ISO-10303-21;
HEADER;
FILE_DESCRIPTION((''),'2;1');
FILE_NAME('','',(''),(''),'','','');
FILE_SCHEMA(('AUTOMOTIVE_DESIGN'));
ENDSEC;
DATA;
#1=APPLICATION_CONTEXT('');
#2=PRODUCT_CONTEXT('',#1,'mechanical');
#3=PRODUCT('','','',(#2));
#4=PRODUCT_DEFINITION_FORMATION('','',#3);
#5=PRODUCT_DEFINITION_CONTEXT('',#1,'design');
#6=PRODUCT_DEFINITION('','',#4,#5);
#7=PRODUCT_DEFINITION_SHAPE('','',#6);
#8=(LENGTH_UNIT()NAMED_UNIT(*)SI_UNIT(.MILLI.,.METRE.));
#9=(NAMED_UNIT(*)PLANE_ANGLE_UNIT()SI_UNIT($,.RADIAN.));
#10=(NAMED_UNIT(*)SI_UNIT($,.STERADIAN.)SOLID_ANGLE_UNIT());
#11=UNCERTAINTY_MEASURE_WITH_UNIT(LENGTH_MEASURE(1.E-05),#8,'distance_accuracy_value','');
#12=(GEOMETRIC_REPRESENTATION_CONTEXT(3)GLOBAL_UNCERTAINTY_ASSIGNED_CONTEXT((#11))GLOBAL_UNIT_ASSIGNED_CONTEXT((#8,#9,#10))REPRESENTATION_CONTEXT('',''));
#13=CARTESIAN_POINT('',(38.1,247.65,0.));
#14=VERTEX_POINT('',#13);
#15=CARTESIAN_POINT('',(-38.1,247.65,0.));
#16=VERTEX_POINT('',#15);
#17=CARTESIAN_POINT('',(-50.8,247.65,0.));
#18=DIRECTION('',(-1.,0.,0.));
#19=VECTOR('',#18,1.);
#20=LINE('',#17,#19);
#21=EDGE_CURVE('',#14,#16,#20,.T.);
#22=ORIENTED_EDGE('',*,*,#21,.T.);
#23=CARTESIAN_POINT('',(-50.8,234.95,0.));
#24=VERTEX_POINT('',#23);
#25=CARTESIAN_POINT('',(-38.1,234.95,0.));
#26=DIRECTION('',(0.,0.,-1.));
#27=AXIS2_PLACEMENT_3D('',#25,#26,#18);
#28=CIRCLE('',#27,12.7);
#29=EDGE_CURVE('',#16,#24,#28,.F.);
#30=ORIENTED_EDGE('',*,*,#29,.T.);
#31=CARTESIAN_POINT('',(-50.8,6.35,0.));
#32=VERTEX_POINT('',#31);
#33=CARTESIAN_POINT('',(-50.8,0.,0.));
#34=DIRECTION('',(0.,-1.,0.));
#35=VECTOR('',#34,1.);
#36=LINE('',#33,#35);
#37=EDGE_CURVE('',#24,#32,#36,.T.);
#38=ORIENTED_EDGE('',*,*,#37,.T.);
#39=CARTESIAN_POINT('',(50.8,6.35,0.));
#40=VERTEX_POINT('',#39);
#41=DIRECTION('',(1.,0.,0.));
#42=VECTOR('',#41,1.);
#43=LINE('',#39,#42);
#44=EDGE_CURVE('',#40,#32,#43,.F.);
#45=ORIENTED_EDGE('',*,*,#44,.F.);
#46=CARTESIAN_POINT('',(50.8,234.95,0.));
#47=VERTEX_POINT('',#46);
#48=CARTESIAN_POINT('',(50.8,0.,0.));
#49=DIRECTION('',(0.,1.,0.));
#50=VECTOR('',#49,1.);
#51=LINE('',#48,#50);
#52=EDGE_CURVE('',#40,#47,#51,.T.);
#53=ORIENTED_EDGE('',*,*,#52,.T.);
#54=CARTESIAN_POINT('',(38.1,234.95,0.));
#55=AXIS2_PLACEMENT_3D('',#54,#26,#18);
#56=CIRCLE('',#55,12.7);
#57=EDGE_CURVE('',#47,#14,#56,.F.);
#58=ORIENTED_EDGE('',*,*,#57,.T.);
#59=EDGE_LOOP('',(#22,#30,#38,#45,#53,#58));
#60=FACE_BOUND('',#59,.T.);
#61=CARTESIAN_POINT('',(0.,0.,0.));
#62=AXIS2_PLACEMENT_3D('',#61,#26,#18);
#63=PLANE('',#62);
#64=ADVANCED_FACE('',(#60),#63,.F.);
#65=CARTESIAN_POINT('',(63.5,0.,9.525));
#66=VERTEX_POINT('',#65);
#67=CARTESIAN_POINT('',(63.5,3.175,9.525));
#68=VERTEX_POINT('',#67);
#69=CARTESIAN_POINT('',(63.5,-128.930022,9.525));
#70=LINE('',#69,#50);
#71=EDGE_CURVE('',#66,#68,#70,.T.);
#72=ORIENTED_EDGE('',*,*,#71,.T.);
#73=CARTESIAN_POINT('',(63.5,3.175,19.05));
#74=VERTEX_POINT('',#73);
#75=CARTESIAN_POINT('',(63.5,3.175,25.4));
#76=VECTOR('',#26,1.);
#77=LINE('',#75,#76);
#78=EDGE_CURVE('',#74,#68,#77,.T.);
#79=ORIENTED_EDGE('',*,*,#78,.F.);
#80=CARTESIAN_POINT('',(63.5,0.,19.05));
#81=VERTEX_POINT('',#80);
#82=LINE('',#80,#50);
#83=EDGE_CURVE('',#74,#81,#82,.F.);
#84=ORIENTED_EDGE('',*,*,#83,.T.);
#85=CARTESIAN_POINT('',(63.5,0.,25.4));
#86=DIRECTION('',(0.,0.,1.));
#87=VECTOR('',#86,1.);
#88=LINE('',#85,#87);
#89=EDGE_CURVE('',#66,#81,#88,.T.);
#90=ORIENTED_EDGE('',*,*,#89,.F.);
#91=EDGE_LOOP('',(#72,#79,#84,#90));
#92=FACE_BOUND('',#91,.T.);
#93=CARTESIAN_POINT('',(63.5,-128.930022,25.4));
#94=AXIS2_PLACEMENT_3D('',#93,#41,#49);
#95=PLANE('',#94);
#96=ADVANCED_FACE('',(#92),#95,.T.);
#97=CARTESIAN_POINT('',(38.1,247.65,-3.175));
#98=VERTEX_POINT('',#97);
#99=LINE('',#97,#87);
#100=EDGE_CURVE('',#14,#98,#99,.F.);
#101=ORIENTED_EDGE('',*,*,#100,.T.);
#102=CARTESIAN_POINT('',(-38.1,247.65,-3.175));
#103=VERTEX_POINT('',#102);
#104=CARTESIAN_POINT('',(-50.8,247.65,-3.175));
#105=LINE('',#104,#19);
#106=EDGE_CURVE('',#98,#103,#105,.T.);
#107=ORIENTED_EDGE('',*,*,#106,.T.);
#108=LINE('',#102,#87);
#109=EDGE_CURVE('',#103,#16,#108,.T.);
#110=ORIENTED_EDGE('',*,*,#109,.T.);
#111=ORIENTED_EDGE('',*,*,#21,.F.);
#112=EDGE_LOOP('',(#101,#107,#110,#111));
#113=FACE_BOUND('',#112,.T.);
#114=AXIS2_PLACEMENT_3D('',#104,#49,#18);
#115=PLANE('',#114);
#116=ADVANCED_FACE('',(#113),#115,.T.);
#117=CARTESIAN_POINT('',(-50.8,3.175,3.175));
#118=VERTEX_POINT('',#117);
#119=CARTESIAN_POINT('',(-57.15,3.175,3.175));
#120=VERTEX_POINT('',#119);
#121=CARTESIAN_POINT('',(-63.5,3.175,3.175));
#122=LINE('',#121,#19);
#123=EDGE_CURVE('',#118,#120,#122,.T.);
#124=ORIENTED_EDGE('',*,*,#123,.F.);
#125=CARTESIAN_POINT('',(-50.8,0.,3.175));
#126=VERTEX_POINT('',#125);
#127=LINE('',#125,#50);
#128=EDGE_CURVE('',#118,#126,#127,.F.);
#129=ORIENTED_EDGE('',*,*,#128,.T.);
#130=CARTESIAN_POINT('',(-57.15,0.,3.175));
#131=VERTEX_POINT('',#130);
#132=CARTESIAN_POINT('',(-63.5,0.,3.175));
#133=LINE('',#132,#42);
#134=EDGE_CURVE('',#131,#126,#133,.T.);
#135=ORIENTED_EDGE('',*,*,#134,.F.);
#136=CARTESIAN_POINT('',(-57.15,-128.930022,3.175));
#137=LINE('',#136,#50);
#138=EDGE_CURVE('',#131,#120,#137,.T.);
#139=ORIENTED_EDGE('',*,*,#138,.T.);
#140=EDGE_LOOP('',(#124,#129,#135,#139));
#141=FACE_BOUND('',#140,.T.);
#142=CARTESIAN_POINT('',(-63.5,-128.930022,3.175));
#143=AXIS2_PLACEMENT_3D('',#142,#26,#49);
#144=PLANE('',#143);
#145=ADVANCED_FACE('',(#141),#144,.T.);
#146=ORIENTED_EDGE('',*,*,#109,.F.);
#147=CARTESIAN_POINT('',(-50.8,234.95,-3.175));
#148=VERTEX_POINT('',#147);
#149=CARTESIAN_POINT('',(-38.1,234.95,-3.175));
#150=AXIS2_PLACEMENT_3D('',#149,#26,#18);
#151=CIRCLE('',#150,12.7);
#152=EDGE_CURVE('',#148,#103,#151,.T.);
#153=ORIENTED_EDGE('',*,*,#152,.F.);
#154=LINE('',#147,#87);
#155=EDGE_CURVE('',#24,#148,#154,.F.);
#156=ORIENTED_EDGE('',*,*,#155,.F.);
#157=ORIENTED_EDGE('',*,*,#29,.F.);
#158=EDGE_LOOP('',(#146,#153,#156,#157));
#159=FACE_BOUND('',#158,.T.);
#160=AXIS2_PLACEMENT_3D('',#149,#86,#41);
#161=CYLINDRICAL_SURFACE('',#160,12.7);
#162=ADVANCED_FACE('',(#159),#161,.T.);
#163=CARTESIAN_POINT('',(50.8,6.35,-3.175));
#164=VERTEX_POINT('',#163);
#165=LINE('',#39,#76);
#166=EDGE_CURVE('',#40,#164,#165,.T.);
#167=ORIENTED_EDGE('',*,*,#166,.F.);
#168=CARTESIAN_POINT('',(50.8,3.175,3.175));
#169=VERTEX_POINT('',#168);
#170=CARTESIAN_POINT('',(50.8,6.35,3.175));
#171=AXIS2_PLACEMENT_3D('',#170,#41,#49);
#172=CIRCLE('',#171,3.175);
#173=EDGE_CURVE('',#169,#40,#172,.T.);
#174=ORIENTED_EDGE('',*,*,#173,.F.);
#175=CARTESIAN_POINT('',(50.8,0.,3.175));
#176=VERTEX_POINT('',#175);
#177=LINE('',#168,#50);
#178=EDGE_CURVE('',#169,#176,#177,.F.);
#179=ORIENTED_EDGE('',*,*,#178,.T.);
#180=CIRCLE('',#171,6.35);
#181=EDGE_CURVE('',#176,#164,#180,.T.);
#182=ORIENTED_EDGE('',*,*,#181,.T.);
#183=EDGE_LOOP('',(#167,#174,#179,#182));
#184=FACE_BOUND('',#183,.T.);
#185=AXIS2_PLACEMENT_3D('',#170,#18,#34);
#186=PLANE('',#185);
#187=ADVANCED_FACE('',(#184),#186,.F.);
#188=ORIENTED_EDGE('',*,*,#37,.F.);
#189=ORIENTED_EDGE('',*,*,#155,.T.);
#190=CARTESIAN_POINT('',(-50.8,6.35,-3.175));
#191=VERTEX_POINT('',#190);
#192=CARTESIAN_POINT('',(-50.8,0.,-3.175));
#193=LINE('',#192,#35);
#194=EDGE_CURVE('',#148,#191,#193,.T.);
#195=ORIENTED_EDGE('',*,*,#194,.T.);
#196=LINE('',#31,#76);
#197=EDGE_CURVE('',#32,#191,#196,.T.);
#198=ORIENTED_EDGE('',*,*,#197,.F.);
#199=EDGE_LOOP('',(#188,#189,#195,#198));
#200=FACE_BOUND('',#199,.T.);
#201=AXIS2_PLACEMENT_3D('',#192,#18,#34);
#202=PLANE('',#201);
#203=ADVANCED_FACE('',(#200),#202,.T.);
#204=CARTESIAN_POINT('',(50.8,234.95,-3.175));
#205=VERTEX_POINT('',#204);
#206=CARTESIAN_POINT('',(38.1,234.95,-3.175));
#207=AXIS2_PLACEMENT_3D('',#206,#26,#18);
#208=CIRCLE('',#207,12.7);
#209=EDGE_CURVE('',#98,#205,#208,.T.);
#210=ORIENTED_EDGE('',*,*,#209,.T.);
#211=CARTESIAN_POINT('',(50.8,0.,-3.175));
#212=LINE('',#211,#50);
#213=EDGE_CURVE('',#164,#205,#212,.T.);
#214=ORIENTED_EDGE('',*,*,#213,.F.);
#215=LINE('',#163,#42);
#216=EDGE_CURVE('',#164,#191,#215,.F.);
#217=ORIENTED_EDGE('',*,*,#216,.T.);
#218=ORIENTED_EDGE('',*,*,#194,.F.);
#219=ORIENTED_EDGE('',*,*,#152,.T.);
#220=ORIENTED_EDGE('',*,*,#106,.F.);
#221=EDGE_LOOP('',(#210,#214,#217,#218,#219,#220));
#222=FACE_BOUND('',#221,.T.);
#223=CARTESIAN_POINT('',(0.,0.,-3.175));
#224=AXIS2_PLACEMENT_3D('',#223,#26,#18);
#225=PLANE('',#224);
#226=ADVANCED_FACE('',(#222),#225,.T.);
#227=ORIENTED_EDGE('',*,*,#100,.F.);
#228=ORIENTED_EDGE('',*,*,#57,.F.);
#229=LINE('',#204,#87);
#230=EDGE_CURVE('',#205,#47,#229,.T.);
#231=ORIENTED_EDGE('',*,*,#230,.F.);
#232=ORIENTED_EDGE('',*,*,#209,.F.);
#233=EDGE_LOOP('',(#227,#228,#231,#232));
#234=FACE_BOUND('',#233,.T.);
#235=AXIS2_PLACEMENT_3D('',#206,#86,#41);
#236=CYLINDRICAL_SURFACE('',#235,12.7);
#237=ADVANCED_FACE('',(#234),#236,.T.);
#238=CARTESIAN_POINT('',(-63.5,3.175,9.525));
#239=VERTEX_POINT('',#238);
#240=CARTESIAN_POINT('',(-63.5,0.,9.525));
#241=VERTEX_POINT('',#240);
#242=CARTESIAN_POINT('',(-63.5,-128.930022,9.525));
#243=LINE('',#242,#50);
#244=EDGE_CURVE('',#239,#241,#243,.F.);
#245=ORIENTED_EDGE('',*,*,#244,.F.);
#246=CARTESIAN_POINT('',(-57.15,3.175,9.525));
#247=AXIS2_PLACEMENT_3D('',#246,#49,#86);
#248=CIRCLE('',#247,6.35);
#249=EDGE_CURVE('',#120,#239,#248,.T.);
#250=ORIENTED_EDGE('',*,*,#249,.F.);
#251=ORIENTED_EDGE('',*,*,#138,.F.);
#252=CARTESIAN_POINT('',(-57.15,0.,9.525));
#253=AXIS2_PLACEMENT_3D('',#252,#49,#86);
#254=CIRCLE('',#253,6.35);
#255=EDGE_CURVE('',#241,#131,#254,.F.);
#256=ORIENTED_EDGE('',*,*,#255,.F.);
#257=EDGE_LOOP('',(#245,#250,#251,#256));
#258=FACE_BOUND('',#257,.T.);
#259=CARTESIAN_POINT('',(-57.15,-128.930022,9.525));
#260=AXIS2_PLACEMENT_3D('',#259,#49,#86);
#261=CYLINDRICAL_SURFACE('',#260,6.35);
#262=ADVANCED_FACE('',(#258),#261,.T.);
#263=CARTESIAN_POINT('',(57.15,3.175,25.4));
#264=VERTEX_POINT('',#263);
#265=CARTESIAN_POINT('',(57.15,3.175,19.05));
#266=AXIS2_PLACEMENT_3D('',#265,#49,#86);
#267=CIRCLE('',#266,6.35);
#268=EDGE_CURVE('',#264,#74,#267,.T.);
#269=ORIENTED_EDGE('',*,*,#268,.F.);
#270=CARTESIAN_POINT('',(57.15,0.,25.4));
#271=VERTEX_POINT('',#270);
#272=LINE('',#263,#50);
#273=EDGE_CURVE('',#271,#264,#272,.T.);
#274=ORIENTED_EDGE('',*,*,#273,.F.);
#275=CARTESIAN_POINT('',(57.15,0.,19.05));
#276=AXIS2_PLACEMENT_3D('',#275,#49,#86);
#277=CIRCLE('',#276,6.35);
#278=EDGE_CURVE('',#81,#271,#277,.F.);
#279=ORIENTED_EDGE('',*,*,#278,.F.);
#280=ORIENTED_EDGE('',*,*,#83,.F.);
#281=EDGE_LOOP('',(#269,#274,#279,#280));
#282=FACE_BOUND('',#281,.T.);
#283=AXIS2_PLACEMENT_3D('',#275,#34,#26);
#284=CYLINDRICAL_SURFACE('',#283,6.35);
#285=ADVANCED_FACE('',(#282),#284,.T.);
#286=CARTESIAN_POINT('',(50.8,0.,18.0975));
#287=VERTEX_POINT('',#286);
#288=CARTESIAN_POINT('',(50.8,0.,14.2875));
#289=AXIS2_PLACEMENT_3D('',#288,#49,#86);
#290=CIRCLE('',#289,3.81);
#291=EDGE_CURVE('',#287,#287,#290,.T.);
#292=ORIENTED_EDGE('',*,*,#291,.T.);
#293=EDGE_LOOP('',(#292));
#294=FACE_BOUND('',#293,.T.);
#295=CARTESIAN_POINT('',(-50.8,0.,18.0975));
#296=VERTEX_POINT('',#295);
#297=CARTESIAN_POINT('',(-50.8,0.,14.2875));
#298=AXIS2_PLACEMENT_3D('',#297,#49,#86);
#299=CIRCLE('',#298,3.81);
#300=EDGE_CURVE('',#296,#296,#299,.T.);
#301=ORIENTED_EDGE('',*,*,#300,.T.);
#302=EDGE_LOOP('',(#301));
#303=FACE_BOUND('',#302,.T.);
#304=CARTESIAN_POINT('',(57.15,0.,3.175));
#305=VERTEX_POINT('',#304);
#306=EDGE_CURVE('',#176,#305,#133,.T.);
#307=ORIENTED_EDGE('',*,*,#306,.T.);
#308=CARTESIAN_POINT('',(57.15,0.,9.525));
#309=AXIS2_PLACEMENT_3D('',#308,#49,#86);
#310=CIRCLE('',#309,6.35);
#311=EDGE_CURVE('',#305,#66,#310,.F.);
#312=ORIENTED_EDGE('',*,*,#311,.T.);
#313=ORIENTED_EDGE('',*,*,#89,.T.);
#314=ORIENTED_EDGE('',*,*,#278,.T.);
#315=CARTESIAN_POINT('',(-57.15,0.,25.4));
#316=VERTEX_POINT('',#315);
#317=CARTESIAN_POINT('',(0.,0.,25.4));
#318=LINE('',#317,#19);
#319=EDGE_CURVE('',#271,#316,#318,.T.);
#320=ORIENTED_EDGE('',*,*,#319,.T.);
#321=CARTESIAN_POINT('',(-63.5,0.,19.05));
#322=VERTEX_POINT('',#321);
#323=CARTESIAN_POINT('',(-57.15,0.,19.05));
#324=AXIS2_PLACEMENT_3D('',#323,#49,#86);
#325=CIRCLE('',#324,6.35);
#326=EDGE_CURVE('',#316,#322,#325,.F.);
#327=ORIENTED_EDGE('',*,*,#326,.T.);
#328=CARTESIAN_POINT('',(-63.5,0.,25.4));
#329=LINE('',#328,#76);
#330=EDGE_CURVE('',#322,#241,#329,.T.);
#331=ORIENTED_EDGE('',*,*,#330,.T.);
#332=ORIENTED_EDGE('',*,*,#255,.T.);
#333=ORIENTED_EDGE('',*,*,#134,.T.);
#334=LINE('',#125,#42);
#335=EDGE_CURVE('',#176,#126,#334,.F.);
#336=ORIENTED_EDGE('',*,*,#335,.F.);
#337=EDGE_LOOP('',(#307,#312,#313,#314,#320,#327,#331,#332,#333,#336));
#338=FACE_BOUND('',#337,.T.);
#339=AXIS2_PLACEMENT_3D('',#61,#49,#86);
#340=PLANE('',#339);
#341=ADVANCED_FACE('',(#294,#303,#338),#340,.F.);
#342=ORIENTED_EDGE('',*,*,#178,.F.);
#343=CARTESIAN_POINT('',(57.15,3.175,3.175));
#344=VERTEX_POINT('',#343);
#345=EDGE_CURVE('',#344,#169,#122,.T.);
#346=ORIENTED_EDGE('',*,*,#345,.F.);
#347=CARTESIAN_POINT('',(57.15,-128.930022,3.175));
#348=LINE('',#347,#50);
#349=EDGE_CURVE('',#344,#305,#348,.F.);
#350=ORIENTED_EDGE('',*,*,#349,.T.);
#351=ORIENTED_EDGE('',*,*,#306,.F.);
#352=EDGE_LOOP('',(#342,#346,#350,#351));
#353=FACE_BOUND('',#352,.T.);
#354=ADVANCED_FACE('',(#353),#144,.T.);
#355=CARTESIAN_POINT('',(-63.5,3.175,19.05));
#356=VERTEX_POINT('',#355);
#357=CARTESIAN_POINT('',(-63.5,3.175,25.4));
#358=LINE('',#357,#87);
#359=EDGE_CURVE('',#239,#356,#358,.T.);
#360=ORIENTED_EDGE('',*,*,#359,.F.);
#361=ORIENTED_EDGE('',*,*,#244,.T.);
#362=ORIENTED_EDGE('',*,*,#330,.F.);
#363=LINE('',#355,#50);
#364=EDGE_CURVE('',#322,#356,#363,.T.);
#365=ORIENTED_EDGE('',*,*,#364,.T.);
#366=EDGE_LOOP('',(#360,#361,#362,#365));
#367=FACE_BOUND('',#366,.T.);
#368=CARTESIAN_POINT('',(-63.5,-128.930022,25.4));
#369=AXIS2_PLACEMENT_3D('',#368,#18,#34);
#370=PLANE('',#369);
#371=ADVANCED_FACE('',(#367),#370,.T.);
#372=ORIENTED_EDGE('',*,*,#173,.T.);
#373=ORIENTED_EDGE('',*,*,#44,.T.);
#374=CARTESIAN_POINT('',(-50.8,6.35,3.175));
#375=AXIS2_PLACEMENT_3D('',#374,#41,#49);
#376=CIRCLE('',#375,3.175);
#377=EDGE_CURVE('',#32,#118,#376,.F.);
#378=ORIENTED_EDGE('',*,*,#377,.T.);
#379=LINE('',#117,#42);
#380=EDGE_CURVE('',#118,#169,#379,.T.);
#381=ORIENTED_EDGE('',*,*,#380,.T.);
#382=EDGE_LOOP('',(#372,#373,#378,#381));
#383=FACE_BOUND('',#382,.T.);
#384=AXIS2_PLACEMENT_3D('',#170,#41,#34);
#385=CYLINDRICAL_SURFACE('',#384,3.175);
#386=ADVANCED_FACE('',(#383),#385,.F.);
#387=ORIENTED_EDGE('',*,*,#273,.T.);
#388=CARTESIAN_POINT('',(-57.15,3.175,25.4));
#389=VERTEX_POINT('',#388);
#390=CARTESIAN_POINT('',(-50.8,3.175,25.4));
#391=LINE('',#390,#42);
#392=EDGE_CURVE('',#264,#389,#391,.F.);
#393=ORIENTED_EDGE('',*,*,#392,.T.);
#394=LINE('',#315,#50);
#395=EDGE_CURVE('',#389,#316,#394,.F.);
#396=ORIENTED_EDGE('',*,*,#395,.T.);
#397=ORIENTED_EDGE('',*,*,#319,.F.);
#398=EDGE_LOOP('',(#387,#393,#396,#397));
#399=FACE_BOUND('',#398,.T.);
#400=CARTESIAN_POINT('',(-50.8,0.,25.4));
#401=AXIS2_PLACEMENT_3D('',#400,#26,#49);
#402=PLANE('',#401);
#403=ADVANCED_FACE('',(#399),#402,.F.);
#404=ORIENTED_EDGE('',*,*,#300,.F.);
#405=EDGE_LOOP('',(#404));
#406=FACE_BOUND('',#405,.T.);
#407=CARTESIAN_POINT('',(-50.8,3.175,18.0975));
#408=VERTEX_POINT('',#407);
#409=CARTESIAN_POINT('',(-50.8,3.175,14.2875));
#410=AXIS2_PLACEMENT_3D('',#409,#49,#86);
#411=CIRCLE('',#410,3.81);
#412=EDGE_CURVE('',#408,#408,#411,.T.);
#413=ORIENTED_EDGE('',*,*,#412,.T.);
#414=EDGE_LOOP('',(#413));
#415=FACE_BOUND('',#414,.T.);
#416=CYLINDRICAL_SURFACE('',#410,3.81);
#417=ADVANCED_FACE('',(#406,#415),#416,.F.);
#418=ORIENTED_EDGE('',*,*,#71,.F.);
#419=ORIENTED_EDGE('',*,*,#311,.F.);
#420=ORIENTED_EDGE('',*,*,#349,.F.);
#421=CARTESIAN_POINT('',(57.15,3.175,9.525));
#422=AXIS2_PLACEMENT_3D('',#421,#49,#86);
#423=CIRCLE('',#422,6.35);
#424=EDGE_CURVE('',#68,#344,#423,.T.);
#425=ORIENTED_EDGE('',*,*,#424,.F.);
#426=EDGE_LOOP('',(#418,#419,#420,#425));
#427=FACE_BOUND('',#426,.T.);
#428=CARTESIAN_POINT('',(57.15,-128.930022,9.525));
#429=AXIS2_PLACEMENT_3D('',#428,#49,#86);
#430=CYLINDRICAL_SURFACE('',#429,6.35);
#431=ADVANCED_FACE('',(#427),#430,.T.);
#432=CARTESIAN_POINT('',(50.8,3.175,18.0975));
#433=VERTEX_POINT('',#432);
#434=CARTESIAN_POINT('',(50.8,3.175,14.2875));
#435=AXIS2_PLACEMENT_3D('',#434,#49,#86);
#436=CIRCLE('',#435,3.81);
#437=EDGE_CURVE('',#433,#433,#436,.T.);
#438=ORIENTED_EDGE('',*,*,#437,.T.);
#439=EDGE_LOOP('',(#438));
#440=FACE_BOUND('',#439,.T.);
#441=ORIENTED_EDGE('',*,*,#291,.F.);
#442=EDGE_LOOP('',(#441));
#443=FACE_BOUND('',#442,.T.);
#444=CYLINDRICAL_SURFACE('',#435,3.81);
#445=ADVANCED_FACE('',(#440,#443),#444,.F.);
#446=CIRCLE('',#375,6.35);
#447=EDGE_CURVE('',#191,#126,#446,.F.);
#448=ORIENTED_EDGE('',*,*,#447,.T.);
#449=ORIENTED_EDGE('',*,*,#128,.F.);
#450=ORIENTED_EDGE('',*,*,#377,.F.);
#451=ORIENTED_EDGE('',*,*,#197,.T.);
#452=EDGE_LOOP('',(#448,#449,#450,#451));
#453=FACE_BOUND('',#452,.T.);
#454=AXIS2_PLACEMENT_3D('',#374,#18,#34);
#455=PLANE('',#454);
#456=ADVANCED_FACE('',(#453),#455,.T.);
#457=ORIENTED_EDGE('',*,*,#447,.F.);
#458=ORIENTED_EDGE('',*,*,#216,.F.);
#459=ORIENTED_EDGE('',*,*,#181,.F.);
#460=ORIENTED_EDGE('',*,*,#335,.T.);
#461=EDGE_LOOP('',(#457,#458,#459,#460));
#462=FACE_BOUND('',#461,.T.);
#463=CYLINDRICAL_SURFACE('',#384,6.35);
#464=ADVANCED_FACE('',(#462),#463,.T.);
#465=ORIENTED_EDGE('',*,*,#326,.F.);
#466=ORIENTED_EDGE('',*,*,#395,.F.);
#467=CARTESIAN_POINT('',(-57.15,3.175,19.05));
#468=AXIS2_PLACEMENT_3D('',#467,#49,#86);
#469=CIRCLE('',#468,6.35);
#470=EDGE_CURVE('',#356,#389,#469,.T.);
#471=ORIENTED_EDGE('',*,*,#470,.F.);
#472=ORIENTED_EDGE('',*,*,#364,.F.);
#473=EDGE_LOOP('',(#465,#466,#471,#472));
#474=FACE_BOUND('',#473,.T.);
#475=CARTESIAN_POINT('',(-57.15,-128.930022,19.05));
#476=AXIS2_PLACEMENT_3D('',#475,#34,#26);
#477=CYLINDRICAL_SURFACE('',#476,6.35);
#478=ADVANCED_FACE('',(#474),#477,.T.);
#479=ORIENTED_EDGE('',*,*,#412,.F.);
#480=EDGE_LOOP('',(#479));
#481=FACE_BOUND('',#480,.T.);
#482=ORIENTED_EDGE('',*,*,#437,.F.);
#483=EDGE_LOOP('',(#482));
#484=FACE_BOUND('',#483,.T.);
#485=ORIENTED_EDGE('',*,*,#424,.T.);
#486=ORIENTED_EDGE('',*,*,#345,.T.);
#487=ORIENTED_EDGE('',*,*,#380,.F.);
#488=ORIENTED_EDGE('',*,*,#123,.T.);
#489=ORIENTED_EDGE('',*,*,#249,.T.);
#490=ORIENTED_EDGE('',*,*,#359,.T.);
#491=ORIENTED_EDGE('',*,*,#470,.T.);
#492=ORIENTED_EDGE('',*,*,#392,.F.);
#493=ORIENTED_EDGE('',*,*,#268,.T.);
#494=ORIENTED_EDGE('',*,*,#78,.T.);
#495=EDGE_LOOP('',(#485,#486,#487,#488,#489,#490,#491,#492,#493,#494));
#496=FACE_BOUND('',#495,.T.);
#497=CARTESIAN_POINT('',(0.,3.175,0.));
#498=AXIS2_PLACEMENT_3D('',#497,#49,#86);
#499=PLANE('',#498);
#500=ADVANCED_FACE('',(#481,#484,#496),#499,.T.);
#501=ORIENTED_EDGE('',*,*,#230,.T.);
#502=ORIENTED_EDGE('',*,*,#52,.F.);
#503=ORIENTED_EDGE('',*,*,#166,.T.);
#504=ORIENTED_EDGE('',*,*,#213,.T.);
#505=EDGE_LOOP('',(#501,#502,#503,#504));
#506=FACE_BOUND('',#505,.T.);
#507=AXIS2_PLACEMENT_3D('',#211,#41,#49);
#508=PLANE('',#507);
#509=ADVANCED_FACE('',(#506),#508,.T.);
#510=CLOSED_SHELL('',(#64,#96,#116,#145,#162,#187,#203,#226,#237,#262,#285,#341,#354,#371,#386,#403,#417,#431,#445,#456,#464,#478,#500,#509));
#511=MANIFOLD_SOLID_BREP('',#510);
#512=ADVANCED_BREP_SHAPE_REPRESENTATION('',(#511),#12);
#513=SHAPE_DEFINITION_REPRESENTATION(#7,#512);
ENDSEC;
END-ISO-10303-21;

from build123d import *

# Parameters (mm, degrees)
SKETCH1_W                    = 101.6
SKETCH1_H                    = 247.65
BASE_FLANGE1_DEPTH           = 3.175
EDGE_FLANGE1_STRIP_W         = 19.05
EDGE_FLANGE1_STRIP_H         = 3.175
EDGE_FLANGE1_STRIP_CUT_DEPTH = 101.6
EDGE_FLANGE1_DEPTH           = 101.6
FILLET1_R                    = 12.7
SKETCH9_W                    = 127
SKETCH9_H                    = 22.225
BOSS_EXTRUDE1_DEPTH          = 3.175
F_1_4_CLEARANCE_HOLE1_D      = 7.62
FILLET3_R                    = 6.35


# Sheet-metal steps are written as plain solids
with BuildPart() as part:
    # Sketch1 → Base-Flange1 (new body)
    with BuildSketch(Plane.XY):
        with Locations((0, 123.825)):
            Rectangle(SKETCH1_W, SKETCH1_H)
    extrude(amount=-BASE_FLANGE1_DEPTH)

    # Edge-Flange1 strip (across the edge) → Edge-Flange1 strip cut (cut)
    with BuildSketch(Plane.YZ.offset(-50.8)):
        with Locations((-3.175, -1.5875)):
            Rectangle(EDGE_FLANGE1_STRIP_W, EDGE_FLANGE1_STRIP_H)
    extrude(amount=EDGE_FLANGE1_STRIP_CUT_DEPTH, mode=Mode.SUBTRACT)

    # Edge-Flange1 section (across the edge) → Edge-Flange1 (add)
    with BuildSketch(Plane.YZ.offset(-50.8)):
        with BuildLine():
            Line((0, 3.175), (0, 25.4))
            Line((0, 25.4), (3.175, 25.4))
            Line((3.175, 25.4), (3.175, 3.175))
            ThreePointArc((3.175, 3.175), (4.10493597, 0.92993597), (6.35, 0))
            Line((6.35, 0), (6.35, -3.175))
            ThreePointArc((6.35, -3.175), (1.859871939, -1.315128061), (0, 3.175))
        make_face()
    extrude(amount=EDGE_FLANGE1_DEPTH)

    # Fillet1
    fillet1_edges = [part.edges().sort_by_distance(p)[0] for p in [
        (-50.8, 247.65, -1.5875),
        (50.8, 247.65, -1.5875),
    ]]
    fillet(fillet1_edges, radius=FILLET1_R)

    # Sketch9 → Boss-Extrude1 (add)
    with BuildSketch(Plane(origin=(0, 3.175, 0), x_dir=(1, 0, 0), z_dir=(0, 1, 0))):
        with Locations((0, -14.2875)):
            Rectangle(SKETCH9_W, SKETCH9_H)
    extrude(amount=-BOSS_EXTRUDE1_DEPTH)

    # 1/4 Clearance Hole1 (through all)
    with Locations(Plane(origin=(0, 3.175, 0), x_dir=(1, 0, 0), z_dir=(0, 1, 0))):
        with Locations((-50.8, -14.2875), (50.8, -14.2875)):
            Hole(F_1_4_CLEARANCE_HOLE1_D / 2)

    # Fillet3
    fillet3_edges = [part.edges().sort_by_distance(p)[0] for p in [
        (-63.5, 1.5875, 3.175),
        (63.5, 1.5875, 25.4),
        (-63.5, 1.5875, 25.4),
        (63.5, 1.5875, 3.175),
    ]]
    fillet(fillet3_edges, radius=FILLET3_R)


solid = part.part
